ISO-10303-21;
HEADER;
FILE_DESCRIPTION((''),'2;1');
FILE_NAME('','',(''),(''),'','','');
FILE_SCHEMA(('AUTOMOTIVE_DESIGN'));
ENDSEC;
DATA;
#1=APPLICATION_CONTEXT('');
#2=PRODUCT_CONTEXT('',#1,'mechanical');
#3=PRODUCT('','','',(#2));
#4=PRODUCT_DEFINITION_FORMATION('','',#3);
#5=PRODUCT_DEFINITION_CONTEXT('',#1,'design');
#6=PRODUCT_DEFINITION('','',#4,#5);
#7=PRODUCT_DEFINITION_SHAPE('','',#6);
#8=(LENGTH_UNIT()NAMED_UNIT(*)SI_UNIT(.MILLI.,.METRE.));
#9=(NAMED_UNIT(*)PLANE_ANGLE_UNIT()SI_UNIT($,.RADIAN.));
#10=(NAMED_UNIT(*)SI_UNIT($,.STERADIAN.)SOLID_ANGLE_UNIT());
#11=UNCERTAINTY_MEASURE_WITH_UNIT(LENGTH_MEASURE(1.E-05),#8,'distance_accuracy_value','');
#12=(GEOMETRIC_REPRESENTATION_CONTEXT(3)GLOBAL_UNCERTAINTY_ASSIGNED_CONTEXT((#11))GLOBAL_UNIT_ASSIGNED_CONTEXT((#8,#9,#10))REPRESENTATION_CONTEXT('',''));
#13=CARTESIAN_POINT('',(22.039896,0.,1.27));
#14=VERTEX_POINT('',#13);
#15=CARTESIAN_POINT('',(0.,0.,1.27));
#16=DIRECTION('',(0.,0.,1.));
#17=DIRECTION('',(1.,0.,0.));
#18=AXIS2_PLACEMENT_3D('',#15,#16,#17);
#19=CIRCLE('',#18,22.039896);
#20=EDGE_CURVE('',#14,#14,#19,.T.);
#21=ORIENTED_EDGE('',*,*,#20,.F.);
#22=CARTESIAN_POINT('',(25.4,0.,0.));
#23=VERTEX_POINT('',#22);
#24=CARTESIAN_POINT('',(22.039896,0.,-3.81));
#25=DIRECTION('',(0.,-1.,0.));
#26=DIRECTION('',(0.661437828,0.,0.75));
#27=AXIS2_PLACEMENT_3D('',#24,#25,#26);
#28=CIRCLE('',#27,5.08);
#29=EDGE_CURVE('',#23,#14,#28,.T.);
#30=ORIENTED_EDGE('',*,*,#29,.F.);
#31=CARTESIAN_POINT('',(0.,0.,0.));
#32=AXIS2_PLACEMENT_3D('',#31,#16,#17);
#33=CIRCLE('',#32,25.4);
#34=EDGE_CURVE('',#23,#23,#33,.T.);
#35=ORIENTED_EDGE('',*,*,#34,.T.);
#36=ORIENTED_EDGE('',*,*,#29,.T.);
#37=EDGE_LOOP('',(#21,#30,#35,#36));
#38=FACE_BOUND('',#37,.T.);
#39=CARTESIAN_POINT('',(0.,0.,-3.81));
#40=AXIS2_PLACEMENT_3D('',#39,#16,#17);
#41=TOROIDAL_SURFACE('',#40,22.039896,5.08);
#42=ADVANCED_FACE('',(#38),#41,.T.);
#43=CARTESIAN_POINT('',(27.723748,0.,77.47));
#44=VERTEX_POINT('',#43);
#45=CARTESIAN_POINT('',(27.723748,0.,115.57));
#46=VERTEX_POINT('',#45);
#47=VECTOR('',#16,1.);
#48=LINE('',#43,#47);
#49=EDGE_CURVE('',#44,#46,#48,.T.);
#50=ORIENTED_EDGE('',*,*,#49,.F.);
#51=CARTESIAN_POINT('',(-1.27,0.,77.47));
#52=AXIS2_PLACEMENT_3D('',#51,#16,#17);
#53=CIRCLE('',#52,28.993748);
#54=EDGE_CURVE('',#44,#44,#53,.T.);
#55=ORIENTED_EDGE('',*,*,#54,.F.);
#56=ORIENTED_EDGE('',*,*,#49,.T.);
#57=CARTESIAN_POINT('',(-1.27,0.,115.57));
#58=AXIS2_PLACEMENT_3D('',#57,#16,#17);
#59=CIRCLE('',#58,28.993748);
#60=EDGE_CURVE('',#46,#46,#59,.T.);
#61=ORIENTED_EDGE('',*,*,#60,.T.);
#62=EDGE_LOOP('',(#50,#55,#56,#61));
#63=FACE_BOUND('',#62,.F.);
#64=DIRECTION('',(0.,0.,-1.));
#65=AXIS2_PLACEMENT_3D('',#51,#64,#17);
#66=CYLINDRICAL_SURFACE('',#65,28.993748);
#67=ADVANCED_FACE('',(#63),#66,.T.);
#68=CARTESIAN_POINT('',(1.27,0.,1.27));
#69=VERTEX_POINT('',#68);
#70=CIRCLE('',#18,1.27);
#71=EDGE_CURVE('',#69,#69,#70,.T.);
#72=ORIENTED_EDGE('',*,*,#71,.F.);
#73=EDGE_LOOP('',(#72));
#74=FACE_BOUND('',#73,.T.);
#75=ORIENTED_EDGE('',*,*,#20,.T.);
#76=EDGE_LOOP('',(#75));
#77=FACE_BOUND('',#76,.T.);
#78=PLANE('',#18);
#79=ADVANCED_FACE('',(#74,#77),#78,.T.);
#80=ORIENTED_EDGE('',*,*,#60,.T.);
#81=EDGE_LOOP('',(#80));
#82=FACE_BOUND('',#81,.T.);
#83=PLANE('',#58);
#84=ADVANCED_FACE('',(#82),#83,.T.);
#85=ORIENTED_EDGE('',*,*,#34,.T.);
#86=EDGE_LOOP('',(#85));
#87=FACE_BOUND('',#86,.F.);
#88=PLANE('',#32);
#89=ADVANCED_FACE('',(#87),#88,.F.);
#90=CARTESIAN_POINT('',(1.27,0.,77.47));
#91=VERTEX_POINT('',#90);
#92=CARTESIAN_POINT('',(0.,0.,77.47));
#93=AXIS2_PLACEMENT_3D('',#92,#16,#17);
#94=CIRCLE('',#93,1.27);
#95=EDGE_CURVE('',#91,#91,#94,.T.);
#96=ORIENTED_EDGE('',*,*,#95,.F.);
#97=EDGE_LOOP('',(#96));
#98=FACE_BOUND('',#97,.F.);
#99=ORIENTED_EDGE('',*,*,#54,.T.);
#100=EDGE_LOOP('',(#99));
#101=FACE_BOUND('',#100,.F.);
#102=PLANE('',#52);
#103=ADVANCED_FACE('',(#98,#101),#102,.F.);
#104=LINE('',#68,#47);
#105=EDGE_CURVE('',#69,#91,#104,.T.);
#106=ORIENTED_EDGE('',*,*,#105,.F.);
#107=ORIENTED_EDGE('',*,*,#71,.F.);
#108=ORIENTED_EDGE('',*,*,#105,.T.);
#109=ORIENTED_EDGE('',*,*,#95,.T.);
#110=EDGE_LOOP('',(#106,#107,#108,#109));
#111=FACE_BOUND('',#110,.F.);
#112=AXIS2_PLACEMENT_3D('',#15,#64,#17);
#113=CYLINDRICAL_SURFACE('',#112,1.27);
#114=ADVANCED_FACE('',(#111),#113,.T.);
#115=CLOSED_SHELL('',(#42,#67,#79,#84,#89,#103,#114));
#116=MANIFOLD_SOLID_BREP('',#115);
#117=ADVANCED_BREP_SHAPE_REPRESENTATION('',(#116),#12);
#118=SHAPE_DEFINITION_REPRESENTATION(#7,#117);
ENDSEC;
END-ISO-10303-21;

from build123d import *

# Parameters (mm, degrees)
F0_R     = 25.4
F1_DEPTH = 1.27
F3_R     = 1.27
F4_DEPTH = 76.2
F5_R     = 28.9937476924
F6_DEPTH = 38.1


# Not quite as in the source:
# - a fillet or chamfer that OpenCascade refuses, or shapes differently, is made with other operations: its cross-section is extruded or revolved along the edge and cut away or added


with BuildPart() as f1:
    # F0 (on Top) → F1 (new body)
    with BuildSketch(Plane.XY):
        Circle(F0_R)
    extrude(amount=F1_DEPTH)

    # F2: fillet of radius 5.08 on 1 edges, made by hand

    # F2_s1 → F2_t2 (revolve, cut)
    with BuildSketch(Plane.XZ):
        with BuildLine():
            ThreePointArc((25.4, 0), (23.8359470592, 0.9419048812), (22.0398958349, 1.27))
            Line((22.0398958349, 1.27), (25.4, 1.27))
            Line((25.4, 1.27), (25.4, 0))
        make_face()
    revolve(axis=Axis((0, 0, 1.27), (0, 0, 1)), mode=Mode.SUBTRACT)

    # F3 (on face) → F4 (join)
    with BuildSketch(Plane.XY.offset(1.27)):
        Circle(F3_R)
    extrude(amount=F4_DEPTH)

    # F5 (on face) → F6 (join)
    with BuildSketch(Plane.XY.offset(77.47)):
        with Locations((-1.27, 0)):
            Circle(F5_R)
    extrude(amount=F6_DEPTH)


solid = f1.part
